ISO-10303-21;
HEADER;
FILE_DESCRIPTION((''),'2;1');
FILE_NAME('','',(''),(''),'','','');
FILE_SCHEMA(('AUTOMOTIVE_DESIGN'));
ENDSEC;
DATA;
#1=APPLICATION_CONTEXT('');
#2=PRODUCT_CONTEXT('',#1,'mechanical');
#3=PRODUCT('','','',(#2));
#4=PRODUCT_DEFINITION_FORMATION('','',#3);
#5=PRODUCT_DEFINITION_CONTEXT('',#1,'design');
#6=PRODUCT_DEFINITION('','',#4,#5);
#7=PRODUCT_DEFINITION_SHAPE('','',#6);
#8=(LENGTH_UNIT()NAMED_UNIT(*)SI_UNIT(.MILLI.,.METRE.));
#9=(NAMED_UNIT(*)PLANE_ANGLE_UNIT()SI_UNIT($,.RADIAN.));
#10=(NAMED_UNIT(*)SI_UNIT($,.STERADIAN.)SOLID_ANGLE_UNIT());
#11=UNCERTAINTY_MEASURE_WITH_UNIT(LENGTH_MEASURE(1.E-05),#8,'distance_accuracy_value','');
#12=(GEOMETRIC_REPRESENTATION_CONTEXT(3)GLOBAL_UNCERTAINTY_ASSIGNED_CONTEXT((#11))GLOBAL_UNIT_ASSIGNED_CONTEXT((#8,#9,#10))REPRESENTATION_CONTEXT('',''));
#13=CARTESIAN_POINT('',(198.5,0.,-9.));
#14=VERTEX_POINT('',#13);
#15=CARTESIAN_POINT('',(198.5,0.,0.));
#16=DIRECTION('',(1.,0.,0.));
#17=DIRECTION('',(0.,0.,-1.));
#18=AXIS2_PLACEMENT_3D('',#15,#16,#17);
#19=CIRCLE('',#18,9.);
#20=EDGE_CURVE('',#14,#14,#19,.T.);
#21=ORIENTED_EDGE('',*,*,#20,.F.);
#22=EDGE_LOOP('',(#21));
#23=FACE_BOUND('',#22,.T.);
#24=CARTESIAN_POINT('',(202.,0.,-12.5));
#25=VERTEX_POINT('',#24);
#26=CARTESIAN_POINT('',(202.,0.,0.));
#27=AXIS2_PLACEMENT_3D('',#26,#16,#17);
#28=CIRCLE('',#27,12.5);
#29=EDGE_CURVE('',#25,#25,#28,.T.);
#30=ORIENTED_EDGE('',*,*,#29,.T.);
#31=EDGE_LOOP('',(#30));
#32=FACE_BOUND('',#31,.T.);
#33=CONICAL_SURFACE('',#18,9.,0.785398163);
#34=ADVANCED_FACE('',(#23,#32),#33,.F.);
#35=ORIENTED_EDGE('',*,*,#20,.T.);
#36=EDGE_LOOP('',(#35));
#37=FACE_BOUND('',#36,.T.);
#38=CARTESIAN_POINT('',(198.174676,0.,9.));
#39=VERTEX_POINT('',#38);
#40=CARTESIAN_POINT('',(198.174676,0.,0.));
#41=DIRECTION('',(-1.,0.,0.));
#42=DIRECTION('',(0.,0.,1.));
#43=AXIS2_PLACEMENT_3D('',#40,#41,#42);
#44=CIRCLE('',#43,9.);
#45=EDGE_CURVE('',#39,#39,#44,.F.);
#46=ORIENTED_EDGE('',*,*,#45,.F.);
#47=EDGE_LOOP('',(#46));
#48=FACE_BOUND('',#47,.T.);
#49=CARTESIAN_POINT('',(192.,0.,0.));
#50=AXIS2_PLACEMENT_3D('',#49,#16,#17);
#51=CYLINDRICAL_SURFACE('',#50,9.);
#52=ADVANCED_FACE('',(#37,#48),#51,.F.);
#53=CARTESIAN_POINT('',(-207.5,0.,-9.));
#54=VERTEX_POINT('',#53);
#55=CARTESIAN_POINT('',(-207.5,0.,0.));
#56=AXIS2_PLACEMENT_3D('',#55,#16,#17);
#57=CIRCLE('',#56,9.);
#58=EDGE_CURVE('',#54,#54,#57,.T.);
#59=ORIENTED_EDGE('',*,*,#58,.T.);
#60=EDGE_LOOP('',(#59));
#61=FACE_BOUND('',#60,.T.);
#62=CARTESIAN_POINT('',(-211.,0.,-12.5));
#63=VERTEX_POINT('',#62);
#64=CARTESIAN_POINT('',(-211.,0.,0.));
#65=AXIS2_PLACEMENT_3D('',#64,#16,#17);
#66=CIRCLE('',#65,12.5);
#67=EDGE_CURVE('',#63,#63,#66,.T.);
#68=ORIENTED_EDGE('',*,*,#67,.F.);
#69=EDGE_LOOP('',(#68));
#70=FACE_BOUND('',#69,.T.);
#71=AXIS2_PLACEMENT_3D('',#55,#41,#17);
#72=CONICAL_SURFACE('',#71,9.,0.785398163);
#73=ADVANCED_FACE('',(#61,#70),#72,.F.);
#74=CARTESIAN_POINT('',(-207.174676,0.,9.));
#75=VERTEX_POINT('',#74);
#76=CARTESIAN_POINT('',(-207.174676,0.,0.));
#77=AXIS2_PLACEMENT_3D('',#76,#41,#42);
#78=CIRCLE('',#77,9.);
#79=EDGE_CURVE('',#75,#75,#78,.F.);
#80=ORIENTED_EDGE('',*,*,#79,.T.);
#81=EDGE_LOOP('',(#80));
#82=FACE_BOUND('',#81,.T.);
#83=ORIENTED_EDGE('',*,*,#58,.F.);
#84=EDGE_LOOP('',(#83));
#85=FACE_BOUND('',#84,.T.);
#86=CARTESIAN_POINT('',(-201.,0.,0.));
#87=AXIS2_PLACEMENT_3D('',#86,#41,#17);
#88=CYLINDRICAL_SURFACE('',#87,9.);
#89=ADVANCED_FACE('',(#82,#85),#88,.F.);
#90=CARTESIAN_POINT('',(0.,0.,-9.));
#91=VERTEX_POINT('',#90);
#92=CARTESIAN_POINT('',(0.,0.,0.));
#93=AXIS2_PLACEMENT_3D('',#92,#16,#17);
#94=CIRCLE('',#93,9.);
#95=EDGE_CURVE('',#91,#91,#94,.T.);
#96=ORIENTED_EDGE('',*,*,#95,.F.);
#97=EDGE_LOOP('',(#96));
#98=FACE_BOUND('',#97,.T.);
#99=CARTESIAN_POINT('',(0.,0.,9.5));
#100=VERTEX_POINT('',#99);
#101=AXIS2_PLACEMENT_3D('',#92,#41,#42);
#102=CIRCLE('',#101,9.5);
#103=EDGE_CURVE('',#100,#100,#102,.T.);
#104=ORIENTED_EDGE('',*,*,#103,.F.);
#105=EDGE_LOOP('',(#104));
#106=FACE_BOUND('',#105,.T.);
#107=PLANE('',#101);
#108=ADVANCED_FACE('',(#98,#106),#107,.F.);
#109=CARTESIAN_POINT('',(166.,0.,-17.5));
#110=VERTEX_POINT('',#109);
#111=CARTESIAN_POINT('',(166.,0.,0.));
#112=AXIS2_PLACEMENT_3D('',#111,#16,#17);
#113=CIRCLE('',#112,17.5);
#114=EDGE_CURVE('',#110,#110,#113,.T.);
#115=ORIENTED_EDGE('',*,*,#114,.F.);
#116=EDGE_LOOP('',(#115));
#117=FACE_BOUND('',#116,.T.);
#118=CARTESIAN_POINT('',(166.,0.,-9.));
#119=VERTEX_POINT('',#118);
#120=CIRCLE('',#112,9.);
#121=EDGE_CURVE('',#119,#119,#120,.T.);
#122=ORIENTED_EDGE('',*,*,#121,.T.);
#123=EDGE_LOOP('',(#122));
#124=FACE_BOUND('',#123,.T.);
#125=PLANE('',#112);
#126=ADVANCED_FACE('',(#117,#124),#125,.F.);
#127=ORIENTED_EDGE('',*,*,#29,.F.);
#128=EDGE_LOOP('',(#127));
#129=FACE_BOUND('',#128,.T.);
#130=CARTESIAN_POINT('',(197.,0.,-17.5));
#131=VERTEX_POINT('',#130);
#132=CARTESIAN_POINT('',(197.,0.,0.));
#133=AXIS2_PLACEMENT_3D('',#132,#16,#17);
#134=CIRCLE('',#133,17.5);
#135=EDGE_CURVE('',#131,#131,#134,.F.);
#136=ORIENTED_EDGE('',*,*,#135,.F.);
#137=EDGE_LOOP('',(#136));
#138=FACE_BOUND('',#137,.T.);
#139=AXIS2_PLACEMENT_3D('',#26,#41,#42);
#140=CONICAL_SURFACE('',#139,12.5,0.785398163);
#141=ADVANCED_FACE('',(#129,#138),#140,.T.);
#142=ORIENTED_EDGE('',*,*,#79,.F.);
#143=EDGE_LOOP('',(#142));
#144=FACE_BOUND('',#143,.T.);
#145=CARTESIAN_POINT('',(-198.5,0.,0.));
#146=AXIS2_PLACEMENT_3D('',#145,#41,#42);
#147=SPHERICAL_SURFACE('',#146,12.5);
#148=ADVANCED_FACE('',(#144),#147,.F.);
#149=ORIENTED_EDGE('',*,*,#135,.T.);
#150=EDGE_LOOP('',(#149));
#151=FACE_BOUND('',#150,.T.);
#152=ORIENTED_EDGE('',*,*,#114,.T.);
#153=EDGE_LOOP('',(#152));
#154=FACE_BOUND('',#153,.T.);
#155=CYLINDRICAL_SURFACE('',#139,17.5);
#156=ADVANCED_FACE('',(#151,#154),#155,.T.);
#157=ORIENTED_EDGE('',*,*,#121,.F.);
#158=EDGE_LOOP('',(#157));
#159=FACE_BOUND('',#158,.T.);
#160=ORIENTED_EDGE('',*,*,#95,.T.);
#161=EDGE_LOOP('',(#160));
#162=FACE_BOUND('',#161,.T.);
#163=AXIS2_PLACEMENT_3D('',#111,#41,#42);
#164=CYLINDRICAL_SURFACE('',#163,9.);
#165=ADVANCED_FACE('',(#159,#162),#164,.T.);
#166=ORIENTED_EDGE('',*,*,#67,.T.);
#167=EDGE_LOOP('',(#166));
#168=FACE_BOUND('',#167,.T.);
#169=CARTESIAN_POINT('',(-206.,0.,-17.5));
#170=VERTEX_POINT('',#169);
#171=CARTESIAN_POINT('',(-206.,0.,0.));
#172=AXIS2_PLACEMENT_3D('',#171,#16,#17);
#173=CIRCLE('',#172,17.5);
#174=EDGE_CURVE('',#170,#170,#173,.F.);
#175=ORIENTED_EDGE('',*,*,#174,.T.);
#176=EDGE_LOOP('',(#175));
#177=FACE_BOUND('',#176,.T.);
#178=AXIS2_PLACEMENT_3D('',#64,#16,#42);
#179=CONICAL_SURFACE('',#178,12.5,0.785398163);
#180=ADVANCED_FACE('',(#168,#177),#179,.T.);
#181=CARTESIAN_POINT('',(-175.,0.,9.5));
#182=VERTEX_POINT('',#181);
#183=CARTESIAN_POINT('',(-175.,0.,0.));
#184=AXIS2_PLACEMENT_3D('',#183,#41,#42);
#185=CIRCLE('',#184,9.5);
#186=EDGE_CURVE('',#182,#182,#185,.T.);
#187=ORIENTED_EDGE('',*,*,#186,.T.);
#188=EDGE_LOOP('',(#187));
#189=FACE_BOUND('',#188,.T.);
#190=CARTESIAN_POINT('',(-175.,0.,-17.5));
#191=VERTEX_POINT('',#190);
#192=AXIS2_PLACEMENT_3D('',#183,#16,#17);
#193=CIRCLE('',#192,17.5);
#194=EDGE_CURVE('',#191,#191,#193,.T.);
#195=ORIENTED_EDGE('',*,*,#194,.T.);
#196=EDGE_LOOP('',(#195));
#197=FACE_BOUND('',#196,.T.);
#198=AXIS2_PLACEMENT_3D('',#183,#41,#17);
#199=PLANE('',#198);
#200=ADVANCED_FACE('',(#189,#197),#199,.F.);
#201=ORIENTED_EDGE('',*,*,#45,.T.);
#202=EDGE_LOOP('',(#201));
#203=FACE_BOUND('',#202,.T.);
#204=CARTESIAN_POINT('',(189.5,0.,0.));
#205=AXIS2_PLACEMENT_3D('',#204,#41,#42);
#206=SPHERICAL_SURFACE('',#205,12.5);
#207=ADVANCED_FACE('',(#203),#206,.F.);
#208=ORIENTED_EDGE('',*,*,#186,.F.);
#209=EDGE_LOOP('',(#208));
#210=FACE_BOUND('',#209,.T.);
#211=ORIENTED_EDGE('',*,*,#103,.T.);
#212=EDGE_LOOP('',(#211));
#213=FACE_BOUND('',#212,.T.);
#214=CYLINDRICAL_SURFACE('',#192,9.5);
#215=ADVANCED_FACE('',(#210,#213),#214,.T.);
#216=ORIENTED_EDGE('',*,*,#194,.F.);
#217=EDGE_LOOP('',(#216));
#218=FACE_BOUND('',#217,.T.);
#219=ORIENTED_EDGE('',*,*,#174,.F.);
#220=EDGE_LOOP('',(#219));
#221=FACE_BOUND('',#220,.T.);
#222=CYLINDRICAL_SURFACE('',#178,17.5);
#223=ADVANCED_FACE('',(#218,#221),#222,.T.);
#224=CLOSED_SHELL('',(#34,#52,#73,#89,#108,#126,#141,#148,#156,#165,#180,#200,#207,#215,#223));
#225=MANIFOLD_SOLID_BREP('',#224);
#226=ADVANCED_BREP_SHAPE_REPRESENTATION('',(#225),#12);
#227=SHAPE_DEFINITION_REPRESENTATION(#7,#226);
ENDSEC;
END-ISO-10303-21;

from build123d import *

# Parameters (mm, degrees)
SZKIC1_R                    = 9
DODANIE_WYCI_GNI_CIE1_DEPTH = 166
SZKIC2_R                    = 9.5
DODANIE_WYCI_GNI_CIE2_DEPTH = 175
SZKIC3_R                    = 17.5
DODANIE_WYCI_GNI_CIE3_DEPTH = 36
SFAZOWANIE1_SIZE            = 5
WYTNIJ_WYCI_GNI_CIE1_START  = -10
SZKIC8_R                    = 9
WYTNIJ_WYCI_GNI_CIE1_DEPTH  = 10
SFAZOWANIE3_SIZE            = 3.5
SFAZOWANIE1_OF_LUSTRO7_SIZE = 5
SFAZOWANIE3_OF_LUSTRO7_SIZE = 3.5


with BuildPart() as part:
    # Szkic1 → Dodanie-wyciągnięcie1 (new body)
    with BuildSketch(Plane(origin=(0, 0, 0), x_dir=(0, 0, -1), z_dir=(1, 0, 0))):
        Circle(SZKIC1_R)
    extrude(amount=DODANIE_WYCI_GNI_CIE1_DEPTH)

    # Szkic2 → Dodanie-wyciągnięcie2 (add)
    with BuildSketch(Plane.ZY):
        Circle(SZKIC2_R)
    extrude(amount=DODANIE_WYCI_GNI_CIE2_DEPTH)

    # Szkic3 → Dodanie-wyciągnięcie3 (add)
    with BuildSketch(Plane(origin=(166, 0, 0), x_dir=(0, 0, -1), z_dir=(1, 0, 0))):
        Circle(SZKIC3_R)
    dodanie_wyci_gni_cie3 = extrude(amount=DODANIE_WYCI_GNI_CIE3_DEPTH)

    # Sfazowanie1
    sfazowanie1_edges = [part.edges().sort_by_distance(p)[0] for p in [
        (202, 0, 17.5),
    ]]
    chamfer(sfazowanie1_edges, length=SFAZOWANIE1_SIZE)

    # Szkic8 → Wytnij-wyciągnięcie1 (cut)
    with BuildSketch(Plane(origin=(202, 0, 0), x_dir=(0, 0, -1), z_dir=(1, 0, 0)).offset(WYTNIJ_WYCI_GNI_CIE1_START)):
        Circle(SZKIC8_R)
    wytnij_wyci_gni_cie1 = extrude(amount=WYTNIJ_WYCI_GNI_CIE1_DEPTH, mode=Mode.SUBTRACT)

    # Szkic4 → Wycięcie-obrót9 (revolve, cut)
    with BuildSketch(Plane.XY):
        with BuildLine():
            Line((189.5, 12.5), (189.5, -12.5))
            ThreePointArc((189.5, -12.5), (202, 0), (189.5, 12.5))
        make_face()
    wyci_cie_obr_t9 = revolve(axis=Axis((189.5, 12.5, 0), (0, -1, 0)), mode=Mode.SUBTRACT)

    # Sfazowanie3
    sfazowanie3_edges = [part.edges().sort_by_distance(p)[0] for p in [
        (202, 0, 9),
    ]]
    chamfer(sfazowanie3_edges, length=SFAZOWANIE3_SIZE - 0.0001)  # a hair under: the kernel refuses the full size

    # Lustro7: Dodanie-wyciągnięcie3, Wytnij-wyciągnięcie1, Wycięcie-obrót9 across plane
    add(dodanie_wyci_gni_cie3.mirror(Plane.ZY.offset(4.5)))
    add(wytnij_wyci_gni_cie1.mirror(Plane.ZY.offset(4.5)), mode=Mode.SUBTRACT)
    add(wyci_cie_obr_t9.mirror(Plane.ZY.offset(4.5)), mode=Mode.SUBTRACT)

    # Sfazowanie1 of Lustro7
    sfazowanie1_of_lustro7_edges = [part.edges().sort_by_distance(p)[0] for p in [
        (-211, 0, 17.5),
    ]]
    chamfer(sfazowanie1_of_lustro7_edges, length=SFAZOWANIE1_OF_LUSTRO7_SIZE)

    # Sfazowanie3 of Lustro7
    sfazowanie3_of_lustro7_edges = [part.edges().sort_by_distance(p)[0] for p in [
        (-211, 0, 9),
    ]]
    chamfer(sfazowanie3_of_lustro7_edges, length=SFAZOWANIE3_OF_LUSTRO7_SIZE - 0.0001)  # a hair under: the kernel refuses the full size


solid = part.part
